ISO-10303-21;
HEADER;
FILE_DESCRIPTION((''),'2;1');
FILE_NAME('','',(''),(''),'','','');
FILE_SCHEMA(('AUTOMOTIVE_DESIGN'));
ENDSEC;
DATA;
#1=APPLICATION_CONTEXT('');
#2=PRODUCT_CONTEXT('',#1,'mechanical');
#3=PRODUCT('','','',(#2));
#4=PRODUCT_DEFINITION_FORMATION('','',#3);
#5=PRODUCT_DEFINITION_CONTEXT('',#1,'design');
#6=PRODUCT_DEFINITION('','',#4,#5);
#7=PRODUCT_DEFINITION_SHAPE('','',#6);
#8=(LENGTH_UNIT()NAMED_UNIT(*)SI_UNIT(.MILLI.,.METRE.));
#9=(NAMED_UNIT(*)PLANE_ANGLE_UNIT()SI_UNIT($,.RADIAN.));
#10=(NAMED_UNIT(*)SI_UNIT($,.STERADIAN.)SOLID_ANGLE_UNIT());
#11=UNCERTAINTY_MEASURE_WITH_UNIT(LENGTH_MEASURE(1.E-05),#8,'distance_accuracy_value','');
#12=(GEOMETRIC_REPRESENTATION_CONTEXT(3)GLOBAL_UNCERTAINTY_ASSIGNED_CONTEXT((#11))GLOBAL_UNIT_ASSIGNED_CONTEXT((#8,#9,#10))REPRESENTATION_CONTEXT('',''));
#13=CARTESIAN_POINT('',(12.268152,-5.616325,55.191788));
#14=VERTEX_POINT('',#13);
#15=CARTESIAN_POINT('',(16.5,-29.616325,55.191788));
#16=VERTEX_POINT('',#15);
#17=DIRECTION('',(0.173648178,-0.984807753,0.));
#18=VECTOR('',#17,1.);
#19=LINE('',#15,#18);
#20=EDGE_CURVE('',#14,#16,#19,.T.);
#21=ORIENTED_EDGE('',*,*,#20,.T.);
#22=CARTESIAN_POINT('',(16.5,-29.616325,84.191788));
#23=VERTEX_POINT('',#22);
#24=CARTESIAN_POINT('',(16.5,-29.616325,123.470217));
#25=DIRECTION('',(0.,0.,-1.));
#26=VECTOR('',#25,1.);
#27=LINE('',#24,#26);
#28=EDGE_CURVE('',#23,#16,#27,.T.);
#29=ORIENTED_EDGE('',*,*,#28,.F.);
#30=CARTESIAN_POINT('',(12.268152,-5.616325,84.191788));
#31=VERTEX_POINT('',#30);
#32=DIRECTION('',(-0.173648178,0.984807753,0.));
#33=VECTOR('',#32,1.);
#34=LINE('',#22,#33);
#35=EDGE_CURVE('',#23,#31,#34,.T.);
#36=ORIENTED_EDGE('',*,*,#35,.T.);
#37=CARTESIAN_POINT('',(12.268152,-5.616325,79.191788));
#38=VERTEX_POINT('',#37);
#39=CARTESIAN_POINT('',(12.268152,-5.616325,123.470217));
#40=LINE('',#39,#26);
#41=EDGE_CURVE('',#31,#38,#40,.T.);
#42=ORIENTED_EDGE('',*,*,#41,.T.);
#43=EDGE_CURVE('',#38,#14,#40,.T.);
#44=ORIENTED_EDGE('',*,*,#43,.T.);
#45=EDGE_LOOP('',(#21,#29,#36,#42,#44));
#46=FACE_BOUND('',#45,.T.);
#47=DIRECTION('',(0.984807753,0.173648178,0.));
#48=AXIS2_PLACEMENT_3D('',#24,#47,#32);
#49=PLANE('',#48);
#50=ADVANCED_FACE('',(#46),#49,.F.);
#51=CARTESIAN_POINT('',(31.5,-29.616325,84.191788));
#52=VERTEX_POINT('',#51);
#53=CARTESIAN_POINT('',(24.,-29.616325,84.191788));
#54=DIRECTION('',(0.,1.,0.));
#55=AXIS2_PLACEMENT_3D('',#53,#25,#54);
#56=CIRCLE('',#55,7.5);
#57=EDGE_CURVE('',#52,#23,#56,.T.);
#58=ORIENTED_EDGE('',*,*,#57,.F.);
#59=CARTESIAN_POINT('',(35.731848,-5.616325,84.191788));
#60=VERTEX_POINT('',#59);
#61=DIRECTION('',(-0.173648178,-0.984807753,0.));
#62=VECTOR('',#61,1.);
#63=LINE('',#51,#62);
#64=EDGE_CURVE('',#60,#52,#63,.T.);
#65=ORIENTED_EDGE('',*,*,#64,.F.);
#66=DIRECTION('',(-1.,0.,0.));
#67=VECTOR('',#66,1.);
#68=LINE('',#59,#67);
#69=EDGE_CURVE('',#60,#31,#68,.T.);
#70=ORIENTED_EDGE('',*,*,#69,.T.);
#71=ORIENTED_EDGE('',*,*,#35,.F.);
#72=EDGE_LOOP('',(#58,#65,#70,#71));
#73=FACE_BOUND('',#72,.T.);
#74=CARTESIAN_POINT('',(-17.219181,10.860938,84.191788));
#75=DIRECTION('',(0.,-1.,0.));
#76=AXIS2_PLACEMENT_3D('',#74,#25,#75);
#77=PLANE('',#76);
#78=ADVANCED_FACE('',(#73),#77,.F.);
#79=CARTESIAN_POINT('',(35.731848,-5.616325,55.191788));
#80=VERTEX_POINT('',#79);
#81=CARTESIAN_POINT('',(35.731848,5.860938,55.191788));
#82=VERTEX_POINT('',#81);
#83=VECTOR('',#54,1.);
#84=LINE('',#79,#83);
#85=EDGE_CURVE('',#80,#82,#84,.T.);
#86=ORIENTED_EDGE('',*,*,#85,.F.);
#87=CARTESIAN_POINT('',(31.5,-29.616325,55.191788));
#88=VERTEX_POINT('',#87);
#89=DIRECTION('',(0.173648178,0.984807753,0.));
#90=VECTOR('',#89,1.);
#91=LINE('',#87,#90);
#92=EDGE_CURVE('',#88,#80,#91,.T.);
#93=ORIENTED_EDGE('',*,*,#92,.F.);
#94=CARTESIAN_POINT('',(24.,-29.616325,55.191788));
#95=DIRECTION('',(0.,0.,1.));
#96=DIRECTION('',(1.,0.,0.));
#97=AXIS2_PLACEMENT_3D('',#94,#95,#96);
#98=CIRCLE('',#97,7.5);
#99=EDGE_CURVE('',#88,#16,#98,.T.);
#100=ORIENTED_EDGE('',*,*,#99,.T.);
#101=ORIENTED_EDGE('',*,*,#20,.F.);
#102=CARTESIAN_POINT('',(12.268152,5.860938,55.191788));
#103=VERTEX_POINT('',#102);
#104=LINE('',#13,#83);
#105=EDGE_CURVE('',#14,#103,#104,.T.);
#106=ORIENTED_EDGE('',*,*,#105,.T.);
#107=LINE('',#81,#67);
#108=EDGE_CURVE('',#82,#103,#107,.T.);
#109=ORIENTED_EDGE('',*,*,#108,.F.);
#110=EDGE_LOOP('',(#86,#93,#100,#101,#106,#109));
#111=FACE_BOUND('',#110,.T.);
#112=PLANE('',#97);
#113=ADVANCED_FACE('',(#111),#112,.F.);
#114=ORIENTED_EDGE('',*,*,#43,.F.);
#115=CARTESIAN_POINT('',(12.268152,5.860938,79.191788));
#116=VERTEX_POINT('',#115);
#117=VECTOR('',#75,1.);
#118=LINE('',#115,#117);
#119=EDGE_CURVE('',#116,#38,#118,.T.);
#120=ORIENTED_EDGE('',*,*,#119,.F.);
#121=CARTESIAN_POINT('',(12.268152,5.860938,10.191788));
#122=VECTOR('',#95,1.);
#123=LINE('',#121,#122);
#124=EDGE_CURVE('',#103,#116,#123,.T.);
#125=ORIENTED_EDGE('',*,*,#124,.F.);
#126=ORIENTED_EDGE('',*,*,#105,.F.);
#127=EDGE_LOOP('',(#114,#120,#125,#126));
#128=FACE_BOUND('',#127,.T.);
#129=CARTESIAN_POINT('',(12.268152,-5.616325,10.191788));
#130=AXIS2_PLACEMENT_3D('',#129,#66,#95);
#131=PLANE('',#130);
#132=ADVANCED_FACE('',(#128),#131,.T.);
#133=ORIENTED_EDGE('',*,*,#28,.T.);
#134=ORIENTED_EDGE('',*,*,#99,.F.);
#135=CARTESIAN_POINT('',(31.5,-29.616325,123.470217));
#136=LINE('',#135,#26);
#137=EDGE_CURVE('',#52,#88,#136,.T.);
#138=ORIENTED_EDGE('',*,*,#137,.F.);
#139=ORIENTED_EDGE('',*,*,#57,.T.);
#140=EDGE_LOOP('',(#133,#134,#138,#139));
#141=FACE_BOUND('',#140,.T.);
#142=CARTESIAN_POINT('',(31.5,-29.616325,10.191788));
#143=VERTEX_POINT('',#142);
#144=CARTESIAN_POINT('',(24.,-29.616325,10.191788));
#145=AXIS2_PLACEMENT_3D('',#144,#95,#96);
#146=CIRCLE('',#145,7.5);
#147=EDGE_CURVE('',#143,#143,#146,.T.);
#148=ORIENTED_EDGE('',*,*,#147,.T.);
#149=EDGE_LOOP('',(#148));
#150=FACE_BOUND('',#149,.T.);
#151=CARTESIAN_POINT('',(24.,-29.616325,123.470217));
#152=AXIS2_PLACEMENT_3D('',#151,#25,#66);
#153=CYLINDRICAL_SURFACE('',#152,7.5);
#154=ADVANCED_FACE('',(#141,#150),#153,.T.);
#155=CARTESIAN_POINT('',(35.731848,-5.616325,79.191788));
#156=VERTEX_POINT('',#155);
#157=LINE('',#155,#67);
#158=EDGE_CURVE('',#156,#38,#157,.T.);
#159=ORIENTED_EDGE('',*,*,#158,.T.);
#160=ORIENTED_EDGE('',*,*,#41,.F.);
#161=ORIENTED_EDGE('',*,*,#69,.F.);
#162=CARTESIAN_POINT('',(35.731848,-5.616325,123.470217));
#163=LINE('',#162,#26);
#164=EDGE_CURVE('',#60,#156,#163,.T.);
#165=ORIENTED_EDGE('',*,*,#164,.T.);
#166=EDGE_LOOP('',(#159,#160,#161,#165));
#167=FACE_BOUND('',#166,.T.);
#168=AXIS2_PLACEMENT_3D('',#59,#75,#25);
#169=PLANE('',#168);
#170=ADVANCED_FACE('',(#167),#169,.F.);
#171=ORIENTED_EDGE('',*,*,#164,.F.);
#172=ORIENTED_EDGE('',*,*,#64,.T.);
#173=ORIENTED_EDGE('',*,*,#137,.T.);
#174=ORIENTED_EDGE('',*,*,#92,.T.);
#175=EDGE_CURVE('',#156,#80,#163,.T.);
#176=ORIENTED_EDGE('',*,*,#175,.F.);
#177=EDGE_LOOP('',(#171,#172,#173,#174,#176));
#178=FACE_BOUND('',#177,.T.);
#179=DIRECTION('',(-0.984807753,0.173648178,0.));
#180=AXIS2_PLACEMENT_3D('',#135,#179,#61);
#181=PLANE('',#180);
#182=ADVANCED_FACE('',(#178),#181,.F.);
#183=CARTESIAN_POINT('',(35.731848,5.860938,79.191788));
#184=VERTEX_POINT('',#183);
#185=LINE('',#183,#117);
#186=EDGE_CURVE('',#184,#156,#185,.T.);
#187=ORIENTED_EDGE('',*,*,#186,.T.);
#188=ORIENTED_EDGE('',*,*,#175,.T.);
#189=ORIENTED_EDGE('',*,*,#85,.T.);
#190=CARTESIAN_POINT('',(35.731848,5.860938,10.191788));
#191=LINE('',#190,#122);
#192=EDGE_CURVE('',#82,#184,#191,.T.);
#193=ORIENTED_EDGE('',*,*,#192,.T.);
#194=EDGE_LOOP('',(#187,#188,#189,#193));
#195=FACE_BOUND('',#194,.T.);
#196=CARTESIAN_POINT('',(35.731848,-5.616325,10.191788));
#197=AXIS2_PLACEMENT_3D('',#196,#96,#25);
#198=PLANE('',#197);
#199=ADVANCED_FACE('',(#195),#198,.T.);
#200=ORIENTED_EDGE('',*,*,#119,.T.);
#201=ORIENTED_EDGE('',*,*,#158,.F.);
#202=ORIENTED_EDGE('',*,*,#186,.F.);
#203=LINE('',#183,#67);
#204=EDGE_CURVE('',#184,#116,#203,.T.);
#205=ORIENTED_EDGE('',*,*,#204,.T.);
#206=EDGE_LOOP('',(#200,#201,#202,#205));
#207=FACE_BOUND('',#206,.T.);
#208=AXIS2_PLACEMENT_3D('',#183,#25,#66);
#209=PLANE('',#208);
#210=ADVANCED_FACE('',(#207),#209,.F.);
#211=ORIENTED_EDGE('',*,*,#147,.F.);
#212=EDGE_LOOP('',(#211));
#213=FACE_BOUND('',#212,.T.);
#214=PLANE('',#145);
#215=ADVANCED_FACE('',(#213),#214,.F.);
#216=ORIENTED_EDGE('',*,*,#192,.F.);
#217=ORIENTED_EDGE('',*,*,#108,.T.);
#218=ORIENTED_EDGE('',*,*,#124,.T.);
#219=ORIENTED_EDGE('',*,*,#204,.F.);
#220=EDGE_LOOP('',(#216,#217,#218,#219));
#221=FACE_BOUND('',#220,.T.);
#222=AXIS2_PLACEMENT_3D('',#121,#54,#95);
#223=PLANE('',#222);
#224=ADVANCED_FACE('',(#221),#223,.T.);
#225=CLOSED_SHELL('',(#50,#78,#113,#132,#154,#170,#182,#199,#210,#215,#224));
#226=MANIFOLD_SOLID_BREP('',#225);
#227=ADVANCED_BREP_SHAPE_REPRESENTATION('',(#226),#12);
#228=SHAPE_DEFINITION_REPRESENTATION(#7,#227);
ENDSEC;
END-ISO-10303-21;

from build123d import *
from build123d.topology import SkipClean

# Parameters (mm, degrees)
SKETCH1_W               = 48
SKETCH1_H               = 53
BOSS_EXTRUDE1_DEPTH     = 10
SKETCH2_W               = 48
SKETCH2_H               = 5.616325
BOSS_EXTRUDE2_DEPTH     = 33.1917878
SKETCH4_W               = 4
SKETCH4_H               = 10
BOSS_EXTRUDE4_DEPTH     = 40
SKETCH5_W               = 48
SKETCH5_H               = 10.8609375
BOSS_EXTRUDE5_DEPTH     = 23.1917878
SKETCH6_W               = 48
SKETCH6_H               = 5
BOSS_EXTRUDE6_DEPTH     = 42.3
SKETCH7_W               = 12.8082122
SKETCH7_H               = 16.4772625
BOSS_EXTRUDE7_DEPTH     = 48
CUT_EXTRUDE1_REACH      = 84.426
SKETCH8_R               = 11.5
SKETCH8_R_2             = 2
FILLET1_R               = 10
FILLET2_R               = 4
SKETCH9_W               = 5
SKETCH9_H               = 16.4772625
BOSS_EXTRUDE9_DEPTH     = 48
CUT_EXTRUDE2_DEPTH      = 88.252507127
SKETCH11_W              = 51
SKETCH11_H              = 16.4772625
BOSS_EXTRUDE10_DEPTH    = 49.45
BOSS_EXTRUDE11_DEPTH    = 46
SKETCH16_W              = 47.95
SKETCH16_H              = 51
BOSS_EXTRUDE14_DEPTH    = 2.55
SKETCH14_W              = 5
SKETCH14_H              = 42.3
BOSS_EXTRUDE13_DEPTH    = 1.5
SKETCH17_W              = 51
SKETCH17_H              = 19.0272625
BOSS_EXTRUDE15_DEPTH    = 9
BOSS_EXTRUDE16_DEPTH    = 25
SKETCH19_R              = 1.9304
CUT_EXTRUDE3_DEPTH      = 125.404890183
MIRROR2_START           = 33.1917878
MIRROR2_DEPTH           = 51
MIRROR2_START_2         = 76.1917878
MIRROR2_2_OUTLINE_W     = 47.95
MIRROR2_2_OUTLINE_H     = 25
MIRROR2_2_OUTLINE_R     = 1.9304
MIRROR2_2_DEPTH         = 8
MIRROR2_3_OUTLINE_W     = 45
MIRROR2_3_OUTLINE_H     = 42.3
MIRROR2_3_OUTLINE_R     = 2
MIRROR2_3_OUTLINE_R_2   = 11.5
MIRROR2_3_DEPTH         = 5
SKETCH20_W              = 103.287975037
SKETCH20_H              = 97.84889924
CUT_EXTRUDE4_DEPTH      = 144.929961559
SKETCH21_W              = 49.5
SKETCH21_H              = 42.3
CUT_EXTRUDE5_DEPTH      = 128.391431036
SKETCH24_R              = 7.5
BOSS_EXTRUDE18_DEPTH    = 45
BOSS_EXTRUDE19_DEPTH    = 29
SKETCH26_R              = 3.937
CUT_EXTRUDE6_DEPTH      = 135.023808387
CUT_EXTRUDE7_DEPTH      = 133.174975247
CUT_EXTRUDE7_DEPTH_BACK = 133.174975247
SKETCH27_W              = 131.04651434
SKETCH27_H              = 69.942394415
SKETCH30_W              = 22
SKETCH30_H              = 11.4772625
SKETCH30_W_2            = 5
CUT_EXTRUDE10_DEPTH     = 95.954850856


# Read off the part's stored shape, not the designer's step: Mirror2
with BuildPart() as part:
    # Sketch1 → Boss-Extrude1 (new body)
    with BuildSketch(Plane.XY):
        with Locations((24, 26.5)):
            Rectangle(SKETCH1_W, SKETCH1_H)
    extrude(amount=BOSS_EXTRUDE1_DEPTH)

    # Sketch2 → Boss-Extrude2 (add)
    with BuildSketch(Plane(origin=(0, 0, 0), x_dir=(-1, 0, 0), z_dir=(0, 0, -1))):
        with Locations((-24, -2.8081625)):
            Rectangle(SKETCH2_W, SKETCH2_H)
    extrude(amount=-BOSS_EXTRUDE2_DEPTH)

    # Sketch4 → Boss-Extrude4 (add)
    with BuildSketch(Plane.XY.offset(10)):
        with Locations((2, 48)):
            Rectangle(SKETCH4_W, SKETCH4_H)
        with Locations((46, 48)):
            Rectangle(SKETCH4_W, SKETCH4_H)
    extrude(amount=BOSS_EXTRUDE4_DEPTH)

    # Sketch5 → Boss-Extrude5 (add)
    with BuildSketch(Plane.XY.offset(10)):
        with Locations((24, 5.43046875)):
            Rectangle(SKETCH5_W, SKETCH5_H)
    extrude(amount=BOSS_EXTRUDE5_DEPTH)

    # Sketch6 → Boss-Extrude6 (add)
    with BuildSketch(Plane.XZ.offset(5.616325)):
        with Locations((24, 30.6917878)):
            Rectangle(SKETCH6_W, SKETCH6_H)
    extrude(amount=BOSS_EXTRUDE6_DEPTH)

    # Sketch7 → Boss-Extrude7 (add)
    with BuildSketch(Plane.ZY):
        with Locations((-6.4041061, 2.62230625)):
            Rectangle(SKETCH7_W, SKETCH7_H)
    extrude(amount=-BOSS_EXTRUDE7_DEPTH)

    # Sketch8 → Cut-Extrude1 (cut, up to next)
    with BuildSketch(Plane(origin=(0, 0, 28.1917878), x_dir=(-1, 0, 0), z_dir=(0, 0, -1)), mode=Mode.PRIVATE) as cut_extrude1_sk1:
        with Locations((-24, -26.616325)):
            Circle(SKETCH8_R)
    cut_extrude1_tool1 = extrude(cut_extrude1_sk1.sketch, amount=-CUT_EXTRUDE1_REACH, mode=Mode.PRIVATE) & part.part
    # Sketch8 → Cut-Extrude1 (cut, up to next)
    with BuildSketch(Plane(origin=(0, 0, 28.1917878), x_dir=(-1, 0, 0), z_dir=(0, 0, -1)), mode=Mode.PRIVATE) as cut_extrude1_sk2:
        with Locations((-39.5, -11.116325)):
            Circle(SKETCH8_R_2)
    cut_extrude1_tool2 = extrude(cut_extrude1_sk2.sketch, amount=-CUT_EXTRUDE1_REACH, mode=Mode.PRIVATE) & part.part
    # Sketch8 → Cut-Extrude1 (cut, up to next)
    with BuildSketch(Plane(origin=(0, 0, 28.1917878), x_dir=(-1, 0, 0), z_dir=(0, 0, -1)), mode=Mode.PRIVATE) as cut_extrude1_sk3:
        with Locations((-39.5, -42.116325)):
            Circle(SKETCH8_R_2)
    cut_extrude1_tool3 = extrude(cut_extrude1_sk3.sketch, amount=-CUT_EXTRUDE1_REACH, mode=Mode.PRIVATE) & part.part
    # Sketch8 → Cut-Extrude1 (cut, up to next)
    with BuildSketch(Plane(origin=(0, 0, 28.1917878), x_dir=(-1, 0, 0), z_dir=(0, 0, -1)), mode=Mode.PRIVATE) as cut_extrude1_sk4:
        with Locations((-8.5, -11.116325)):
            Circle(SKETCH8_R_2)
    cut_extrude1_tool4 = extrude(cut_extrude1_sk4.sketch, amount=-CUT_EXTRUDE1_REACH, mode=Mode.PRIVATE) & part.part
    # Sketch8 → Cut-Extrude1 (cut, up to next)
    with BuildSketch(Plane(origin=(0, 0, 28.1917878), x_dir=(-1, 0, 0), z_dir=(0, 0, -1)), mode=Mode.PRIVATE) as cut_extrude1_sk5:
        with Locations((-8.5, -42.116325)):
            Circle(SKETCH8_R_2)
    cut_extrude1_tool5 = extrude(cut_extrude1_sk5.sketch, amount=-CUT_EXTRUDE1_REACH, mode=Mode.PRIVATE) & part.part
    add(cut_extrude1_tool1.solids().sort_by_distance((24, -26.616325, 28.191788))[0], mode=Mode.SUBTRACT)
    add(cut_extrude1_tool2.solids().sort_by_distance((39.5, -11.116325, 28.191788))[0], mode=Mode.SUBTRACT)
    add(cut_extrude1_tool3.solids().sort_by_distance((39.5, -42.116325, 28.191788))[0], mode=Mode.SUBTRACT)
    add(cut_extrude1_tool4.solids().sort_by_distance((8.5, -11.116325, 28.191788))[0], mode=Mode.SUBTRACT)
    add(cut_extrude1_tool5.solids().sort_by_distance((8.5, -42.116325, 28.191788))[0], mode=Mode.SUBTRACT)

    # Fillet1
    fillet1_edges = [part.edges().sort_by_distance(p)[0] for p in [
        (24, 10.8609375, 0),
    ]]
    fillet(fillet1_edges, radius=FILLET1_R)

    # Fillet2
    fillet2_edges = [part.edges().sort_by_distance(p)[0] for p in [
        (2, 43, 10),
        (46, 43, 10),
    ]]
    fillet(fillet2_edges, radius=FILLET2_R)

    # Sketch9 → Boss-Extrude9 (add)
    with BuildSketch(Plane(origin=(48, 0, 0), x_dir=(0, 0, -1), z_dir=(1, 0, 0))):
        with Locations((15.3082122, 2.62230625)):
            Rectangle(SKETCH9_W, SKETCH9_H)
    extrude(amount=-BOSS_EXTRUDE9_DEPTH)

    # Sketch10 → Cut-Extrude2 (cut, through all)
    with BuildSketch(Plane(origin=(48, 0, 0), x_dir=(0, 0, -1), z_dir=(1, 0, 0))):
        Polygon((17.8082122, 10.8609375), (-33.1917878, 10.8609375), (-76.887145623, 43.902095521), (-50.794096938, 74.436514195), (27.207463492, 71.105486703), align=None)
    extrude(amount=-CUT_EXTRUDE2_DEPTH, mode=Mode.SUBTRACT)

    # Sketch11 → Boss-Extrude10 (add)
    with BuildSketch(Plane(origin=(48, 0, 0), x_dir=(0, 0, -1), z_dir=(1, 0, 0))):
        with Locations((-7.6917878, 2.62230625)):
            Rectangle(SKETCH11_W, SKETCH11_H)
    extrude(amount=BOSS_EXTRUDE10_DEPTH)

    # Sketch12 → Boss-Extrude11 (add)
    with BuildSketch(Plane(origin=(0, 0, 28.1917878), x_dir=(-1, 0, 0), z_dir=(0, 0, -1))):
        Polygon((-48, -47.916325), (-45, -47.916325), (-45, -5.616325), (-49.5, -5.616325), (-49.5, -47.916325), align=None)
    extrude(amount=BOSS_EXTRUDE11_DEPTH)

    # Sketch16 → Boss-Extrude14 (add)
    with BuildSketch(Plane.XZ.offset(5.616325)):
        with Locations((73.475, 7.6917878)):
            Rectangle(SKETCH16_W, SKETCH16_H)
    extrude(amount=BOSS_EXTRUDE14_DEPTH)

    # Sketch14 → Boss-Extrude13 (add)
    with BuildSketch(Plane(origin=(49.5, 0, 0), x_dir=(0, 0, -1), z_dir=(1, 0, 0))):
        with Locations((-30.6917878, -26.766325)):
            Rectangle(SKETCH14_W, SKETCH14_H)
    extrude(amount=-BOSS_EXTRUDE13_DEPTH)

    # Sketch17 → Boss-Extrude15 (add)
    with BuildSketch(Plane(origin=(97.45, 0, 0), x_dir=(0, 0, -1), z_dir=(1, 0, 0))):
        with Locations((-7.6917878, 1.34730625)):
            Rectangle(SKETCH17_W, SKETCH17_H)
    extrude(amount=BOSS_EXTRUDE15_DEPTH)

    # Sketch18 → Boss-Extrude16 (add)
    with BuildSketch(Plane.XZ.offset(8.166325)):
        Polygon((49.5, -17.8082122), (106.45, -17.8082122), (106.45, -9.8082122), (106.45, 33.1917878), (97.45, 33.1917878), (97.45, -9.8082122), (49.5, -9.8082122), align=None)
    extrude(amount=BOSS_EXTRUDE16_DEPTH)

    # Sketch19 → Cut-Extrude3 (cut, through all)
    with BuildSketch(Plane.XY.offset(-9.8082122)):
        with Locations((58.475, -26.166325)):
            Circle(SKETCH19_R)
        with Locations((88.475, -26.166325)):
            Circle(SKETCH19_R)
    extrude(amount=-CUT_EXTRUDE3_DEPTH, mode=Mode.SUBTRACT)

    # Mirror2 outline → Mirror2 (add)
    with BuildSketch(Plane.XY.offset(MIRROR2_START)):
        Polygon((49.5, -47.916325), (49.5, -8.166325), (97.45, -8.166325), (97.45, -33.166325), (106.45, -33.166325), (106.45, 10.8609375), (0, 10.8609375), (0, -5.616325), (45, -5.616325), (45, -47.916325), align=None)
    extrude(amount=MIRROR2_DEPTH)

    # Mirror2 2 outline → Mirror2 2 (add)
    with BuildSketch(Plane.XY.offset(MIRROR2_START_2)):
        with Locations((73.475, -20.666325)):
            Rectangle(MIRROR2_2_OUTLINE_W, MIRROR2_2_OUTLINE_H)
        with Locations((58.475, -26.166325)):
            Circle(MIRROR2_2_OUTLINE_R, mode=Mode.SUBTRACT)
        with Locations((88.475, -26.166325)):
            Circle(MIRROR2_2_OUTLINE_R, mode=Mode.SUBTRACT)
    extrude(amount=MIRROR2_2_DEPTH)

    # Mirror2 3 outline → Mirror2 3 (add)
    with SkipClean():  # the faces are left unmerged after this step: merging them gives an invalid solid
        with BuildSketch(Plane.XY.offset(MIRROR2_START)):
            with Locations((22.5, -26.766325)):
                Rectangle(MIRROR2_3_OUTLINE_W, MIRROR2_3_OUTLINE_H)
            with Locations((8.5, -42.116325)):
                Circle(MIRROR2_3_OUTLINE_R, mode=Mode.SUBTRACT)
            with Locations((39.5, -42.116325)):
                Circle(MIRROR2_3_OUTLINE_R, mode=Mode.SUBTRACT)
            with Locations((24, -26.616325)):
                Circle(MIRROR2_3_OUTLINE_R_2, mode=Mode.SUBTRACT)
            with Locations((8.5, -11.116325)):
                Circle(MIRROR2_3_OUTLINE_R, mode=Mode.SUBTRACT)
            with Locations((39.5, -11.116325)):
                Circle(MIRROR2_3_OUTLINE_R, mode=Mode.SUBTRACT)
        extrude(amount=MIRROR2_3_DEPTH)

    # Sketch20 → Cut-Extrude4 (cut, through all)
    with BuildSketch(Plane.ZY):
        with Locations((-18.452199719, -38.06351212)):
            Rectangle(SKETCH20_W, SKETCH20_H)
    extrude(amount=-CUT_EXTRUDE4_DEPTH, mode=Mode.SUBTRACT)

    # Sketch21 → Cut-Extrude5 (cut, through all)
    with BuildSketch(Plane.XY.offset(84.1917878)):
        with Locations((24.75, -26.766325)):
            Rectangle(SKETCH21_W, SKETCH21_H)
    extrude(amount=-CUT_EXTRUDE5_DEPTH, mode=Mode.SUBTRACT)



with BuildPart() as body_2:
    # Sketch24 → Boss-Extrude18 (new body)
    with BuildSketch(Plane.XY.offset(55.1917878)):
        with Locations((24, -29.616325)):
            Circle(SKETCH24_R)
    extrude(amount=-BOSS_EXTRUDE18_DEPTH)


with BuildPart() as part_1:
    add(part.part)

    add(body_2.part)  # Boss-Extrude19 merges body 2
    # Sketch25 → Boss-Extrude19 (add)
    with BuildSketch(Plane.XY.offset(55.1917878)):
        with BuildLine():
            Line((16.5, -29.616325), (12.268152463, -5.616325))
            Line((12.268152463, -5.616325), (35.731847537, -5.616325))
            Line((35.731847537, -5.616325), (31.5, -29.616325))
            ThreePointArc((31.5, -29.616325), (24, -37.116325), (16.5, -29.616325))
        make_face()
    extrude(amount=BOSS_EXTRUDE19_DEPTH)

    # Sketch26 → Cut-Extrude6 (cut, through all)
    with BuildSketch(Plane.ZY.offset(-97.45)):
        with Locations((59.1917878, -16.166325)):
            Circle(SKETCH26_R)
    extrude(amount=-CUT_EXTRUDE6_DEPTH, mode=Mode.SUBTRACT)

    # Sketch27 → Cut-Extrude7 (cut, two sides: drawn at the far end of the back side and taken through both)
    with BuildSketch(Plane.XY.offset(79.1917878).offset(-CUT_EXTRUDE7_DEPTH_BACK)):
        with Locations((52.297526751, -17.773339354)):
            Rectangle(SKETCH27_W, SKETCH27_H)
        Polygon((12.268152463, -5.616325), (12.268152463, 5.8609375), (35.731847537, 5.8609375), (35.731847537, -5.616325), (35.731847537, -46.734959709), (12.268152463, -46.734959709), align=None, mode=Mode.SUBTRACT)
    extrude(amount=CUT_EXTRUDE7_DEPTH + CUT_EXTRUDE7_DEPTH_BACK, mode=Mode.SUBTRACT)

    # Sketch30 → Cut-Extrude10 (cut, through all)
    with BuildSketch(Plane.ZY.offset(-12.268152463)):
        with Locations((44.1917878, 0.12230625)):
            Rectangle(SKETCH30_W, SKETCH30_H)
        with Locations((81.6917878, 0.12230625)):
            Rectangle(SKETCH30_W_2, SKETCH30_H)
    extrude(amount=-CUT_EXTRUDE10_DEPTH, mode=Mode.SUBTRACT)


solid = part_1.part
